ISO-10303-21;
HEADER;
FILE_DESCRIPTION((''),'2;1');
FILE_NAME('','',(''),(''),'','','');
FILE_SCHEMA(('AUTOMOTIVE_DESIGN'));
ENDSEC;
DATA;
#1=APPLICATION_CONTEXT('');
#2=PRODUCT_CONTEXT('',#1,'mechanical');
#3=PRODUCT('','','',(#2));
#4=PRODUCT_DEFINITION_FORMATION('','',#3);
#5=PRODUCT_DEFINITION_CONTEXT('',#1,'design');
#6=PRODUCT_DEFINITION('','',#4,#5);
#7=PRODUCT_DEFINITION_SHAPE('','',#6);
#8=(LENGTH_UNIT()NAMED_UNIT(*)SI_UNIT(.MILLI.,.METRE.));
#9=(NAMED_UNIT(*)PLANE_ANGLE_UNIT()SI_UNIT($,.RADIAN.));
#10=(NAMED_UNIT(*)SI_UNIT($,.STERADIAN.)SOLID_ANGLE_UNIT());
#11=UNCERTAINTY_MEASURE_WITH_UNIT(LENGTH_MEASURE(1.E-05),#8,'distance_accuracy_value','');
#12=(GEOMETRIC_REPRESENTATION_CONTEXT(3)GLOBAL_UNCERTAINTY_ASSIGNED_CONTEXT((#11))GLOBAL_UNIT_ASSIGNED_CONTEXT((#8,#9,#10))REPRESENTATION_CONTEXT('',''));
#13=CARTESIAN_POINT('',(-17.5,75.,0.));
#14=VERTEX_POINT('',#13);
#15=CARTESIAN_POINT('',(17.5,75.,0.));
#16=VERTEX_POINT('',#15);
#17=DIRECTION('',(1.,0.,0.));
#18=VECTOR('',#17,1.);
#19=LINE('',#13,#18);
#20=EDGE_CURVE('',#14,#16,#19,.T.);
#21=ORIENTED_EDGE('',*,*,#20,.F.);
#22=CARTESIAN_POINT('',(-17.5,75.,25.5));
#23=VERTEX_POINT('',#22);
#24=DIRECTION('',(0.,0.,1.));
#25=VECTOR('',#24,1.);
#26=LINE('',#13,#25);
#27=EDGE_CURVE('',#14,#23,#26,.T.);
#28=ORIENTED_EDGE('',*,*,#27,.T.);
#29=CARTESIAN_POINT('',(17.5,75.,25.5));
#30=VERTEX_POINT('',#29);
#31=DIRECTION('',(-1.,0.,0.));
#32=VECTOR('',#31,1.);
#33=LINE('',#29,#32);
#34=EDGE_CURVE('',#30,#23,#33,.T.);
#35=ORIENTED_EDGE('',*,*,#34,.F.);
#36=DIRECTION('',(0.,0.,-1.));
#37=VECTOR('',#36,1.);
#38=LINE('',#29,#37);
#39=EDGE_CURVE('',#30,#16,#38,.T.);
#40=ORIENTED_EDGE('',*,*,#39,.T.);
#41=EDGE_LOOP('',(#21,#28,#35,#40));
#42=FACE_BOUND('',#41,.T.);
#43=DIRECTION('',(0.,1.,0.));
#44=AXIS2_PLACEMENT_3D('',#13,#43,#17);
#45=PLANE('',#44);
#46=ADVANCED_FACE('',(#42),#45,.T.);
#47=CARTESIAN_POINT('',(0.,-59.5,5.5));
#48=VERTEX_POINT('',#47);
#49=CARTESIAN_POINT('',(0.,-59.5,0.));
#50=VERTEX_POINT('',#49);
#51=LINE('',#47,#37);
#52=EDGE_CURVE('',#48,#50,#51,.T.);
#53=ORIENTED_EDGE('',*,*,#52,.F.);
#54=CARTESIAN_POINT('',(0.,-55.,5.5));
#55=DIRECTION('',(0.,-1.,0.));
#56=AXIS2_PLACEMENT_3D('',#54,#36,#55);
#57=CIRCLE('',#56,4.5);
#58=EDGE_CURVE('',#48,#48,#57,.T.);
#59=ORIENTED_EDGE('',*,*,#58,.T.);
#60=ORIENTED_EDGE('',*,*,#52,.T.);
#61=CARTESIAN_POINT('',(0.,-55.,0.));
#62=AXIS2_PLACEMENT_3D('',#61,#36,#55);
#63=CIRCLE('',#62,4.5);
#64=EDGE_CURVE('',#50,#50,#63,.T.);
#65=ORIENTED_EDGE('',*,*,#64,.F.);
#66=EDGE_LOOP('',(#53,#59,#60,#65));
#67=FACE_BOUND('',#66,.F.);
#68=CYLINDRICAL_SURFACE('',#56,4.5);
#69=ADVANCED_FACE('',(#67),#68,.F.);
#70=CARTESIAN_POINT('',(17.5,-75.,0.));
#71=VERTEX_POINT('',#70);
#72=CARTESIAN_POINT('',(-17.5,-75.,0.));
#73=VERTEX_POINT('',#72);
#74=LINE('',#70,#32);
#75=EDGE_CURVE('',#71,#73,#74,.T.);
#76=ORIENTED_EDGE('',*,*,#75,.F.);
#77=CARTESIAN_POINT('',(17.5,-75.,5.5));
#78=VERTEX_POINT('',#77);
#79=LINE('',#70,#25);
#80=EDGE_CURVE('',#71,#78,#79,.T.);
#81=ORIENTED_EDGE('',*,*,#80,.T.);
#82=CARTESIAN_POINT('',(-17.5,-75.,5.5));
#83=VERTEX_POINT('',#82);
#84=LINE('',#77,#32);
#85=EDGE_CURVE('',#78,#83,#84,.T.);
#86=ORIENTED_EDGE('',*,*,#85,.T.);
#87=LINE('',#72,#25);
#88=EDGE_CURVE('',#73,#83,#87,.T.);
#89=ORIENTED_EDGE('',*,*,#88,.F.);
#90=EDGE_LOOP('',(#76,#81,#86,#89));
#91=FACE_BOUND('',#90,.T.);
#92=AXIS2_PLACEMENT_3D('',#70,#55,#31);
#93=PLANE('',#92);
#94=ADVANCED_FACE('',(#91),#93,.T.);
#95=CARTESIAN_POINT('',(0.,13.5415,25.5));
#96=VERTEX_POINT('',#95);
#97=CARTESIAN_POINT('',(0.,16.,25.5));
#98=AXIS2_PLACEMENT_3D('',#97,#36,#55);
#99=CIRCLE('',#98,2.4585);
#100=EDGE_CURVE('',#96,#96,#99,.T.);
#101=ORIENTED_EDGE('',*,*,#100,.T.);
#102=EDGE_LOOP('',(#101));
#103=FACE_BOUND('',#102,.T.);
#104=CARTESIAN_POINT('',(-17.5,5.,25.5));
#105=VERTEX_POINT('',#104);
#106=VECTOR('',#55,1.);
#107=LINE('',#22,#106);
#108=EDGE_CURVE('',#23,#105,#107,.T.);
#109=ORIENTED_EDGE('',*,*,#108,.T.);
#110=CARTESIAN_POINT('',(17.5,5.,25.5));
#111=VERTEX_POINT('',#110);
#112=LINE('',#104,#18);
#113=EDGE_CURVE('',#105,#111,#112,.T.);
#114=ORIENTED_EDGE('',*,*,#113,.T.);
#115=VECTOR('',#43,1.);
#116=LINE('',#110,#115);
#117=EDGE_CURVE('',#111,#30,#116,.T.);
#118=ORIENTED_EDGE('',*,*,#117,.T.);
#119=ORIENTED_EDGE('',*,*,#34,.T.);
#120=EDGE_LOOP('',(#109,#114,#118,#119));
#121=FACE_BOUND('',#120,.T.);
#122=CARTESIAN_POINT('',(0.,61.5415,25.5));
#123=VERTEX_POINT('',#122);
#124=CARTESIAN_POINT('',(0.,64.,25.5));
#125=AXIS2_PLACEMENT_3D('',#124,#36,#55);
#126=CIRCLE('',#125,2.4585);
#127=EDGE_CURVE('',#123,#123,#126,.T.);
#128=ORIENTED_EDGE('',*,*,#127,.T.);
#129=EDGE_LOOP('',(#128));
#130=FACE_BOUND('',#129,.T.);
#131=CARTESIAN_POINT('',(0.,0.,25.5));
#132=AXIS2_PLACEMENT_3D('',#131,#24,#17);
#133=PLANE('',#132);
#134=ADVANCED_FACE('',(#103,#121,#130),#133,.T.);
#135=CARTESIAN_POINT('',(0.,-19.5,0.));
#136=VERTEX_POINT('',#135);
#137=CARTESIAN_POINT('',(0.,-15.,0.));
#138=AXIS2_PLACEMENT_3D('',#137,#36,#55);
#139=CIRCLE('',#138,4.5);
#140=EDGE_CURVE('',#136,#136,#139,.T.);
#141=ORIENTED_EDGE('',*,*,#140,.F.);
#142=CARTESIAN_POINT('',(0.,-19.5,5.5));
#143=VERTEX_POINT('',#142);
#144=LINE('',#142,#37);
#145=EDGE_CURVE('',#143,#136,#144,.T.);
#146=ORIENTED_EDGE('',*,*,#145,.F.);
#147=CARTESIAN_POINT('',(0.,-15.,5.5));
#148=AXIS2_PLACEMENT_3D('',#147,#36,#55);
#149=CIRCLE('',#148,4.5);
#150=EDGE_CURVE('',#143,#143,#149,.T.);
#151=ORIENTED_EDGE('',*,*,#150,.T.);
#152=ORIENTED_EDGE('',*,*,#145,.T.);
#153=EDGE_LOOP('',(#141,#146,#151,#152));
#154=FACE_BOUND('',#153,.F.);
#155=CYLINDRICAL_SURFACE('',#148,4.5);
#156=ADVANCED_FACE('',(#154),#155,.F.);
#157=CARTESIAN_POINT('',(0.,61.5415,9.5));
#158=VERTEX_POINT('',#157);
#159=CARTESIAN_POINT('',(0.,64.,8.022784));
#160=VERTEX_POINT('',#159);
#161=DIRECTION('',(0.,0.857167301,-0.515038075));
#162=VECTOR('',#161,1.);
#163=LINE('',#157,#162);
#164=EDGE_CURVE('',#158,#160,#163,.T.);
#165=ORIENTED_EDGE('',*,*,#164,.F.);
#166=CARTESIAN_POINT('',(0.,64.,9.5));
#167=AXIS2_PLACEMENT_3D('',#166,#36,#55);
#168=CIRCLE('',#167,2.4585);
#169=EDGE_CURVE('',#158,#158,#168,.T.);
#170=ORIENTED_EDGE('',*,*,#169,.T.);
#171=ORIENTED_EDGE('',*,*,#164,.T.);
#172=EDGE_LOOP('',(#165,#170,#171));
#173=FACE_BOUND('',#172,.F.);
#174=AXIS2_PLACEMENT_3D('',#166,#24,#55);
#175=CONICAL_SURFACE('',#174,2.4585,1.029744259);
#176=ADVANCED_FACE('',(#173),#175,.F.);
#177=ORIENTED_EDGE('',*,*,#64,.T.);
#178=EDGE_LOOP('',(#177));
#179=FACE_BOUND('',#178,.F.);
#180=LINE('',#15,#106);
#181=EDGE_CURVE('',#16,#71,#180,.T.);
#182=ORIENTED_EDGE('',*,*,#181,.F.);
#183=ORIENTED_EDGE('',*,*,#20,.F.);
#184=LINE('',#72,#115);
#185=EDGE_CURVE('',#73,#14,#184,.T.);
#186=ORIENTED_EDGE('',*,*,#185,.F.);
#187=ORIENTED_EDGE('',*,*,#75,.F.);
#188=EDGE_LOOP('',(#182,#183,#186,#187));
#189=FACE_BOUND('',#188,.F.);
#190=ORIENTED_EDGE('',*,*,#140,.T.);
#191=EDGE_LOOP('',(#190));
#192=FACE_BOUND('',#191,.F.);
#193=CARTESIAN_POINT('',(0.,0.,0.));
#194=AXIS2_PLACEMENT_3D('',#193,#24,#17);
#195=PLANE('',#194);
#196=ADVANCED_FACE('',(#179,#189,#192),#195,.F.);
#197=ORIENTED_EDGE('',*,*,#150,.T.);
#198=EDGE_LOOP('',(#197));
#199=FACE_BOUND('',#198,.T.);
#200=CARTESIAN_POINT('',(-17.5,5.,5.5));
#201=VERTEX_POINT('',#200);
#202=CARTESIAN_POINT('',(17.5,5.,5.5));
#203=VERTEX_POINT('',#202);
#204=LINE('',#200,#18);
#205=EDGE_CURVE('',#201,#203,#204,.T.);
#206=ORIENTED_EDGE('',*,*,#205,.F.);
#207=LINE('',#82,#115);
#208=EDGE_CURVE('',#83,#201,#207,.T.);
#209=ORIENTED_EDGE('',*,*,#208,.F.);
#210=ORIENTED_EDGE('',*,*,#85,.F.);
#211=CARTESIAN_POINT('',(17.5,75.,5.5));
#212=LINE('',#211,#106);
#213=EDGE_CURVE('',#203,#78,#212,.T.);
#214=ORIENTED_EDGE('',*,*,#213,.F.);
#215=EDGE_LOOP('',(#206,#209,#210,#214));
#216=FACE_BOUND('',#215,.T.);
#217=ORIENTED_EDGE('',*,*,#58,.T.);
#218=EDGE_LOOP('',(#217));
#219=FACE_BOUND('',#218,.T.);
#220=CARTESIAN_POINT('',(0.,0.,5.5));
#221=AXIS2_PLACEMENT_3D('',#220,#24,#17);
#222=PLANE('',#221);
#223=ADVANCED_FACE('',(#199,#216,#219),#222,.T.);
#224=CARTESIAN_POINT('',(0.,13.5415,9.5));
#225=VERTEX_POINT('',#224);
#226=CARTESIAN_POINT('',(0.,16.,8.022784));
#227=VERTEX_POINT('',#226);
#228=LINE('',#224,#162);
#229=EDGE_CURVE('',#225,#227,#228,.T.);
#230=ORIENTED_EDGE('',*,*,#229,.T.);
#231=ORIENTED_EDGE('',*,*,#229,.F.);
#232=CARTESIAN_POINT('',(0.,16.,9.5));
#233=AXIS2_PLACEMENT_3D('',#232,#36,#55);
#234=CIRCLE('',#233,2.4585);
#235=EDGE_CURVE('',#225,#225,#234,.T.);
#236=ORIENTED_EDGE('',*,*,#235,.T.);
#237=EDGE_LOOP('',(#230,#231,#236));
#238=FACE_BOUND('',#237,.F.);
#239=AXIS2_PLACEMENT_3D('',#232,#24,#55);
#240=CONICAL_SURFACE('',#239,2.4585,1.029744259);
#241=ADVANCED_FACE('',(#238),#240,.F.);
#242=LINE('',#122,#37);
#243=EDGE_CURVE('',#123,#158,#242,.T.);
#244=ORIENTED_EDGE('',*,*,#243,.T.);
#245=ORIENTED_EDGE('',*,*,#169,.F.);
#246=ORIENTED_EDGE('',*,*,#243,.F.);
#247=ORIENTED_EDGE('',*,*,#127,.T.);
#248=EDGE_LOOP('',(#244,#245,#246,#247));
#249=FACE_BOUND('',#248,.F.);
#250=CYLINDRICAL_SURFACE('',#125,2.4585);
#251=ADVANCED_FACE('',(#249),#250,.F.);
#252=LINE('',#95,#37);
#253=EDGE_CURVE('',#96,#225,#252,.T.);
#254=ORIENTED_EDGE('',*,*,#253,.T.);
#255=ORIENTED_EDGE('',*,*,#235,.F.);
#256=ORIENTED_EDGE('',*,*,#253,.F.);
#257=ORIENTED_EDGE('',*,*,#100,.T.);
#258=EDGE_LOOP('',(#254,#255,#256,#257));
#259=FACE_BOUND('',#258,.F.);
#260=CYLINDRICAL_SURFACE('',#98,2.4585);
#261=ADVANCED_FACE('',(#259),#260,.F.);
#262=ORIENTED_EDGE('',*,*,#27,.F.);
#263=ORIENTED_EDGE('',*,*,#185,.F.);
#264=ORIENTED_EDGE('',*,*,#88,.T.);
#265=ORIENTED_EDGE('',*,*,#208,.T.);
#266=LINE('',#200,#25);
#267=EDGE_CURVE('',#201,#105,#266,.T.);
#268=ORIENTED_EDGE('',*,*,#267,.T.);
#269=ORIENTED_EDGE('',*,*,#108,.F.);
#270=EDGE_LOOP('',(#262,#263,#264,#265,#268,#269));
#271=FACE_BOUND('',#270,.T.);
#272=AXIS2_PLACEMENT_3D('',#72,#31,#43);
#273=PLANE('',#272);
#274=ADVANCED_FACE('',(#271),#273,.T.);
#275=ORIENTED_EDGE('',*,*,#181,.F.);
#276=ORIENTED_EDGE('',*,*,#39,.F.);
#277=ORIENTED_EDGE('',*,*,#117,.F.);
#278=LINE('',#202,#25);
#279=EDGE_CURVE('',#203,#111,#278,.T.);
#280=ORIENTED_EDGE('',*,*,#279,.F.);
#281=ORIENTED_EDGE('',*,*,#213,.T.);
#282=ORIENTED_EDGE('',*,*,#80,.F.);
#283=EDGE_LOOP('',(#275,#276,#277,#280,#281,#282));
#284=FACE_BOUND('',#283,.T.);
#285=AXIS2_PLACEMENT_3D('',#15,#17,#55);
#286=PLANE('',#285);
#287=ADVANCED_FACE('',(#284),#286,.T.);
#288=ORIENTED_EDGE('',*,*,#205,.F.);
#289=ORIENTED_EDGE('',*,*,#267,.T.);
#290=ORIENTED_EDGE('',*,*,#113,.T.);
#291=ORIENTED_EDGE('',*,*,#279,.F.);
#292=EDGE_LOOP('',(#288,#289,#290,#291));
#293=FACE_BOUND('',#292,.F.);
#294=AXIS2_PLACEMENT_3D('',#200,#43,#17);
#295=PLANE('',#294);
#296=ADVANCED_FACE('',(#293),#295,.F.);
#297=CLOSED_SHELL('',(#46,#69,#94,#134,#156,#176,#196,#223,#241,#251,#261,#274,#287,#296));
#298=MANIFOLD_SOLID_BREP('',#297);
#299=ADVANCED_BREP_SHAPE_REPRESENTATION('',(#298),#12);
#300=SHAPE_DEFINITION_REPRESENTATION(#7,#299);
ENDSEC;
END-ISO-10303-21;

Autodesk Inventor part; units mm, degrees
ref_plane "YZ Plane" through (0, 0, 0) normal (1, 0, 0) x (0, 1, 0)
sketch "Skizze1" plane through (0, 0, 0) normal (0, 0, 1) x (1, 0, 0)
  line L0 (-17.5, 75) -> (17.5, 75)
  line L1 (17.5, 75) -> (17.5, -75)
  line L2 (17.5, -75) -> (-17.5, -75)
  line L3 (-17.5, -75) -> (-17.5, 75)
  line L4 (-17.5, 75) -> (17.5, -75) construction
  line L5 (17.5, 75) -> (-17.5, -75) construction
  point P0 (0, 0)
  dimension "d0" = 35
  dimension "d1" = 150
extrude "Extrusion1" add sketch "Skizze1" along normal blind 5.5
sketch "Skizze3" plane through (0, 0, 5.5) normal (0, 0, 1) x (1, 0, 0)
  line L0 (-17.5, 5) -> (17.5, 5)
  line L1 (17.5, 5) -> (17.5, 75)
  line L2 (17.5, 75) -> (-17.5, 75)
  line L3 (-17.5, 75) -> (-17.5, 5)
  line L4 (-17.5, 5) -> (17.5, 75) construction
  line L5 (17.5, 5) -> (-17.5, 75) construction
  line L6 (-17.5, 75) -> (-17.5, -75) projected
  line L7 (17.5, 75) -> (-17.5, 75) projected
  line L8 (17.5, -75) -> (17.5, 75) projected
  point P0 (0, 40)
  point P1 (-4.35, 75)
  point P2 (-17.5, 40)
  dimension "d8" = 70
extrude "Extrusion3" add sketch "Skizze3" along normal blind 20
ref_plane "Arbeitsebene2" through (-17.5, 40, 5.5) normal (0, -1, 0) x (1, 0, 0)
sketch "Skizze5" plane through (0, 0, 25.5) normal (0, 0, 1) x (1, 0, 0)
  line L0 (24.5, 40) -> (-24.5, 40) projected
  line L1 (0, 105) -> (0, -105) projected
  point P0 (0, 0)
  point P1 (0, 16)
  point P2 (0, 64)
  dimension "d23" = 24
  dimension "d24" = 24
hole "Bohrung2" at (0, 16, 25.5) at (0, 64, 25.5) direction (0, 0, -1) diameter 4.917 depth 16 tip angle 118 thread size "M6x1" class "6H" standard "ISO Metric profile"
ref_plane "Arbeitsebene3" through (-17.5, -27.5, 0) normal (0, -1, 0) x (1, 0, 0)
sketch "Skizze6" plane through (0, 0, 5.5) normal (0, 0, 1) x (1, 0, 0)
  line L0 (0, 105) -> (0, -105) projected
  line L1 (-17.5, -75) -> (17.5, -75) projected
  point P0 (0, 0)
  point P1 (0, -55)
  point P2 (0, -15)
  dimension "d36" = 20
  dimension "d37" = 60
hole "Bohrung3" at (0, -55, 5.5) at (0, -15, 5.5) direction (0, 0, -1) diameter 9 end through all clearance for "Flachkopfsenkschraube DIN EN ISO 2009" size "M8" standard "DIN"
properties part number "Adapterplatte_Vibrationsdaempfer"
